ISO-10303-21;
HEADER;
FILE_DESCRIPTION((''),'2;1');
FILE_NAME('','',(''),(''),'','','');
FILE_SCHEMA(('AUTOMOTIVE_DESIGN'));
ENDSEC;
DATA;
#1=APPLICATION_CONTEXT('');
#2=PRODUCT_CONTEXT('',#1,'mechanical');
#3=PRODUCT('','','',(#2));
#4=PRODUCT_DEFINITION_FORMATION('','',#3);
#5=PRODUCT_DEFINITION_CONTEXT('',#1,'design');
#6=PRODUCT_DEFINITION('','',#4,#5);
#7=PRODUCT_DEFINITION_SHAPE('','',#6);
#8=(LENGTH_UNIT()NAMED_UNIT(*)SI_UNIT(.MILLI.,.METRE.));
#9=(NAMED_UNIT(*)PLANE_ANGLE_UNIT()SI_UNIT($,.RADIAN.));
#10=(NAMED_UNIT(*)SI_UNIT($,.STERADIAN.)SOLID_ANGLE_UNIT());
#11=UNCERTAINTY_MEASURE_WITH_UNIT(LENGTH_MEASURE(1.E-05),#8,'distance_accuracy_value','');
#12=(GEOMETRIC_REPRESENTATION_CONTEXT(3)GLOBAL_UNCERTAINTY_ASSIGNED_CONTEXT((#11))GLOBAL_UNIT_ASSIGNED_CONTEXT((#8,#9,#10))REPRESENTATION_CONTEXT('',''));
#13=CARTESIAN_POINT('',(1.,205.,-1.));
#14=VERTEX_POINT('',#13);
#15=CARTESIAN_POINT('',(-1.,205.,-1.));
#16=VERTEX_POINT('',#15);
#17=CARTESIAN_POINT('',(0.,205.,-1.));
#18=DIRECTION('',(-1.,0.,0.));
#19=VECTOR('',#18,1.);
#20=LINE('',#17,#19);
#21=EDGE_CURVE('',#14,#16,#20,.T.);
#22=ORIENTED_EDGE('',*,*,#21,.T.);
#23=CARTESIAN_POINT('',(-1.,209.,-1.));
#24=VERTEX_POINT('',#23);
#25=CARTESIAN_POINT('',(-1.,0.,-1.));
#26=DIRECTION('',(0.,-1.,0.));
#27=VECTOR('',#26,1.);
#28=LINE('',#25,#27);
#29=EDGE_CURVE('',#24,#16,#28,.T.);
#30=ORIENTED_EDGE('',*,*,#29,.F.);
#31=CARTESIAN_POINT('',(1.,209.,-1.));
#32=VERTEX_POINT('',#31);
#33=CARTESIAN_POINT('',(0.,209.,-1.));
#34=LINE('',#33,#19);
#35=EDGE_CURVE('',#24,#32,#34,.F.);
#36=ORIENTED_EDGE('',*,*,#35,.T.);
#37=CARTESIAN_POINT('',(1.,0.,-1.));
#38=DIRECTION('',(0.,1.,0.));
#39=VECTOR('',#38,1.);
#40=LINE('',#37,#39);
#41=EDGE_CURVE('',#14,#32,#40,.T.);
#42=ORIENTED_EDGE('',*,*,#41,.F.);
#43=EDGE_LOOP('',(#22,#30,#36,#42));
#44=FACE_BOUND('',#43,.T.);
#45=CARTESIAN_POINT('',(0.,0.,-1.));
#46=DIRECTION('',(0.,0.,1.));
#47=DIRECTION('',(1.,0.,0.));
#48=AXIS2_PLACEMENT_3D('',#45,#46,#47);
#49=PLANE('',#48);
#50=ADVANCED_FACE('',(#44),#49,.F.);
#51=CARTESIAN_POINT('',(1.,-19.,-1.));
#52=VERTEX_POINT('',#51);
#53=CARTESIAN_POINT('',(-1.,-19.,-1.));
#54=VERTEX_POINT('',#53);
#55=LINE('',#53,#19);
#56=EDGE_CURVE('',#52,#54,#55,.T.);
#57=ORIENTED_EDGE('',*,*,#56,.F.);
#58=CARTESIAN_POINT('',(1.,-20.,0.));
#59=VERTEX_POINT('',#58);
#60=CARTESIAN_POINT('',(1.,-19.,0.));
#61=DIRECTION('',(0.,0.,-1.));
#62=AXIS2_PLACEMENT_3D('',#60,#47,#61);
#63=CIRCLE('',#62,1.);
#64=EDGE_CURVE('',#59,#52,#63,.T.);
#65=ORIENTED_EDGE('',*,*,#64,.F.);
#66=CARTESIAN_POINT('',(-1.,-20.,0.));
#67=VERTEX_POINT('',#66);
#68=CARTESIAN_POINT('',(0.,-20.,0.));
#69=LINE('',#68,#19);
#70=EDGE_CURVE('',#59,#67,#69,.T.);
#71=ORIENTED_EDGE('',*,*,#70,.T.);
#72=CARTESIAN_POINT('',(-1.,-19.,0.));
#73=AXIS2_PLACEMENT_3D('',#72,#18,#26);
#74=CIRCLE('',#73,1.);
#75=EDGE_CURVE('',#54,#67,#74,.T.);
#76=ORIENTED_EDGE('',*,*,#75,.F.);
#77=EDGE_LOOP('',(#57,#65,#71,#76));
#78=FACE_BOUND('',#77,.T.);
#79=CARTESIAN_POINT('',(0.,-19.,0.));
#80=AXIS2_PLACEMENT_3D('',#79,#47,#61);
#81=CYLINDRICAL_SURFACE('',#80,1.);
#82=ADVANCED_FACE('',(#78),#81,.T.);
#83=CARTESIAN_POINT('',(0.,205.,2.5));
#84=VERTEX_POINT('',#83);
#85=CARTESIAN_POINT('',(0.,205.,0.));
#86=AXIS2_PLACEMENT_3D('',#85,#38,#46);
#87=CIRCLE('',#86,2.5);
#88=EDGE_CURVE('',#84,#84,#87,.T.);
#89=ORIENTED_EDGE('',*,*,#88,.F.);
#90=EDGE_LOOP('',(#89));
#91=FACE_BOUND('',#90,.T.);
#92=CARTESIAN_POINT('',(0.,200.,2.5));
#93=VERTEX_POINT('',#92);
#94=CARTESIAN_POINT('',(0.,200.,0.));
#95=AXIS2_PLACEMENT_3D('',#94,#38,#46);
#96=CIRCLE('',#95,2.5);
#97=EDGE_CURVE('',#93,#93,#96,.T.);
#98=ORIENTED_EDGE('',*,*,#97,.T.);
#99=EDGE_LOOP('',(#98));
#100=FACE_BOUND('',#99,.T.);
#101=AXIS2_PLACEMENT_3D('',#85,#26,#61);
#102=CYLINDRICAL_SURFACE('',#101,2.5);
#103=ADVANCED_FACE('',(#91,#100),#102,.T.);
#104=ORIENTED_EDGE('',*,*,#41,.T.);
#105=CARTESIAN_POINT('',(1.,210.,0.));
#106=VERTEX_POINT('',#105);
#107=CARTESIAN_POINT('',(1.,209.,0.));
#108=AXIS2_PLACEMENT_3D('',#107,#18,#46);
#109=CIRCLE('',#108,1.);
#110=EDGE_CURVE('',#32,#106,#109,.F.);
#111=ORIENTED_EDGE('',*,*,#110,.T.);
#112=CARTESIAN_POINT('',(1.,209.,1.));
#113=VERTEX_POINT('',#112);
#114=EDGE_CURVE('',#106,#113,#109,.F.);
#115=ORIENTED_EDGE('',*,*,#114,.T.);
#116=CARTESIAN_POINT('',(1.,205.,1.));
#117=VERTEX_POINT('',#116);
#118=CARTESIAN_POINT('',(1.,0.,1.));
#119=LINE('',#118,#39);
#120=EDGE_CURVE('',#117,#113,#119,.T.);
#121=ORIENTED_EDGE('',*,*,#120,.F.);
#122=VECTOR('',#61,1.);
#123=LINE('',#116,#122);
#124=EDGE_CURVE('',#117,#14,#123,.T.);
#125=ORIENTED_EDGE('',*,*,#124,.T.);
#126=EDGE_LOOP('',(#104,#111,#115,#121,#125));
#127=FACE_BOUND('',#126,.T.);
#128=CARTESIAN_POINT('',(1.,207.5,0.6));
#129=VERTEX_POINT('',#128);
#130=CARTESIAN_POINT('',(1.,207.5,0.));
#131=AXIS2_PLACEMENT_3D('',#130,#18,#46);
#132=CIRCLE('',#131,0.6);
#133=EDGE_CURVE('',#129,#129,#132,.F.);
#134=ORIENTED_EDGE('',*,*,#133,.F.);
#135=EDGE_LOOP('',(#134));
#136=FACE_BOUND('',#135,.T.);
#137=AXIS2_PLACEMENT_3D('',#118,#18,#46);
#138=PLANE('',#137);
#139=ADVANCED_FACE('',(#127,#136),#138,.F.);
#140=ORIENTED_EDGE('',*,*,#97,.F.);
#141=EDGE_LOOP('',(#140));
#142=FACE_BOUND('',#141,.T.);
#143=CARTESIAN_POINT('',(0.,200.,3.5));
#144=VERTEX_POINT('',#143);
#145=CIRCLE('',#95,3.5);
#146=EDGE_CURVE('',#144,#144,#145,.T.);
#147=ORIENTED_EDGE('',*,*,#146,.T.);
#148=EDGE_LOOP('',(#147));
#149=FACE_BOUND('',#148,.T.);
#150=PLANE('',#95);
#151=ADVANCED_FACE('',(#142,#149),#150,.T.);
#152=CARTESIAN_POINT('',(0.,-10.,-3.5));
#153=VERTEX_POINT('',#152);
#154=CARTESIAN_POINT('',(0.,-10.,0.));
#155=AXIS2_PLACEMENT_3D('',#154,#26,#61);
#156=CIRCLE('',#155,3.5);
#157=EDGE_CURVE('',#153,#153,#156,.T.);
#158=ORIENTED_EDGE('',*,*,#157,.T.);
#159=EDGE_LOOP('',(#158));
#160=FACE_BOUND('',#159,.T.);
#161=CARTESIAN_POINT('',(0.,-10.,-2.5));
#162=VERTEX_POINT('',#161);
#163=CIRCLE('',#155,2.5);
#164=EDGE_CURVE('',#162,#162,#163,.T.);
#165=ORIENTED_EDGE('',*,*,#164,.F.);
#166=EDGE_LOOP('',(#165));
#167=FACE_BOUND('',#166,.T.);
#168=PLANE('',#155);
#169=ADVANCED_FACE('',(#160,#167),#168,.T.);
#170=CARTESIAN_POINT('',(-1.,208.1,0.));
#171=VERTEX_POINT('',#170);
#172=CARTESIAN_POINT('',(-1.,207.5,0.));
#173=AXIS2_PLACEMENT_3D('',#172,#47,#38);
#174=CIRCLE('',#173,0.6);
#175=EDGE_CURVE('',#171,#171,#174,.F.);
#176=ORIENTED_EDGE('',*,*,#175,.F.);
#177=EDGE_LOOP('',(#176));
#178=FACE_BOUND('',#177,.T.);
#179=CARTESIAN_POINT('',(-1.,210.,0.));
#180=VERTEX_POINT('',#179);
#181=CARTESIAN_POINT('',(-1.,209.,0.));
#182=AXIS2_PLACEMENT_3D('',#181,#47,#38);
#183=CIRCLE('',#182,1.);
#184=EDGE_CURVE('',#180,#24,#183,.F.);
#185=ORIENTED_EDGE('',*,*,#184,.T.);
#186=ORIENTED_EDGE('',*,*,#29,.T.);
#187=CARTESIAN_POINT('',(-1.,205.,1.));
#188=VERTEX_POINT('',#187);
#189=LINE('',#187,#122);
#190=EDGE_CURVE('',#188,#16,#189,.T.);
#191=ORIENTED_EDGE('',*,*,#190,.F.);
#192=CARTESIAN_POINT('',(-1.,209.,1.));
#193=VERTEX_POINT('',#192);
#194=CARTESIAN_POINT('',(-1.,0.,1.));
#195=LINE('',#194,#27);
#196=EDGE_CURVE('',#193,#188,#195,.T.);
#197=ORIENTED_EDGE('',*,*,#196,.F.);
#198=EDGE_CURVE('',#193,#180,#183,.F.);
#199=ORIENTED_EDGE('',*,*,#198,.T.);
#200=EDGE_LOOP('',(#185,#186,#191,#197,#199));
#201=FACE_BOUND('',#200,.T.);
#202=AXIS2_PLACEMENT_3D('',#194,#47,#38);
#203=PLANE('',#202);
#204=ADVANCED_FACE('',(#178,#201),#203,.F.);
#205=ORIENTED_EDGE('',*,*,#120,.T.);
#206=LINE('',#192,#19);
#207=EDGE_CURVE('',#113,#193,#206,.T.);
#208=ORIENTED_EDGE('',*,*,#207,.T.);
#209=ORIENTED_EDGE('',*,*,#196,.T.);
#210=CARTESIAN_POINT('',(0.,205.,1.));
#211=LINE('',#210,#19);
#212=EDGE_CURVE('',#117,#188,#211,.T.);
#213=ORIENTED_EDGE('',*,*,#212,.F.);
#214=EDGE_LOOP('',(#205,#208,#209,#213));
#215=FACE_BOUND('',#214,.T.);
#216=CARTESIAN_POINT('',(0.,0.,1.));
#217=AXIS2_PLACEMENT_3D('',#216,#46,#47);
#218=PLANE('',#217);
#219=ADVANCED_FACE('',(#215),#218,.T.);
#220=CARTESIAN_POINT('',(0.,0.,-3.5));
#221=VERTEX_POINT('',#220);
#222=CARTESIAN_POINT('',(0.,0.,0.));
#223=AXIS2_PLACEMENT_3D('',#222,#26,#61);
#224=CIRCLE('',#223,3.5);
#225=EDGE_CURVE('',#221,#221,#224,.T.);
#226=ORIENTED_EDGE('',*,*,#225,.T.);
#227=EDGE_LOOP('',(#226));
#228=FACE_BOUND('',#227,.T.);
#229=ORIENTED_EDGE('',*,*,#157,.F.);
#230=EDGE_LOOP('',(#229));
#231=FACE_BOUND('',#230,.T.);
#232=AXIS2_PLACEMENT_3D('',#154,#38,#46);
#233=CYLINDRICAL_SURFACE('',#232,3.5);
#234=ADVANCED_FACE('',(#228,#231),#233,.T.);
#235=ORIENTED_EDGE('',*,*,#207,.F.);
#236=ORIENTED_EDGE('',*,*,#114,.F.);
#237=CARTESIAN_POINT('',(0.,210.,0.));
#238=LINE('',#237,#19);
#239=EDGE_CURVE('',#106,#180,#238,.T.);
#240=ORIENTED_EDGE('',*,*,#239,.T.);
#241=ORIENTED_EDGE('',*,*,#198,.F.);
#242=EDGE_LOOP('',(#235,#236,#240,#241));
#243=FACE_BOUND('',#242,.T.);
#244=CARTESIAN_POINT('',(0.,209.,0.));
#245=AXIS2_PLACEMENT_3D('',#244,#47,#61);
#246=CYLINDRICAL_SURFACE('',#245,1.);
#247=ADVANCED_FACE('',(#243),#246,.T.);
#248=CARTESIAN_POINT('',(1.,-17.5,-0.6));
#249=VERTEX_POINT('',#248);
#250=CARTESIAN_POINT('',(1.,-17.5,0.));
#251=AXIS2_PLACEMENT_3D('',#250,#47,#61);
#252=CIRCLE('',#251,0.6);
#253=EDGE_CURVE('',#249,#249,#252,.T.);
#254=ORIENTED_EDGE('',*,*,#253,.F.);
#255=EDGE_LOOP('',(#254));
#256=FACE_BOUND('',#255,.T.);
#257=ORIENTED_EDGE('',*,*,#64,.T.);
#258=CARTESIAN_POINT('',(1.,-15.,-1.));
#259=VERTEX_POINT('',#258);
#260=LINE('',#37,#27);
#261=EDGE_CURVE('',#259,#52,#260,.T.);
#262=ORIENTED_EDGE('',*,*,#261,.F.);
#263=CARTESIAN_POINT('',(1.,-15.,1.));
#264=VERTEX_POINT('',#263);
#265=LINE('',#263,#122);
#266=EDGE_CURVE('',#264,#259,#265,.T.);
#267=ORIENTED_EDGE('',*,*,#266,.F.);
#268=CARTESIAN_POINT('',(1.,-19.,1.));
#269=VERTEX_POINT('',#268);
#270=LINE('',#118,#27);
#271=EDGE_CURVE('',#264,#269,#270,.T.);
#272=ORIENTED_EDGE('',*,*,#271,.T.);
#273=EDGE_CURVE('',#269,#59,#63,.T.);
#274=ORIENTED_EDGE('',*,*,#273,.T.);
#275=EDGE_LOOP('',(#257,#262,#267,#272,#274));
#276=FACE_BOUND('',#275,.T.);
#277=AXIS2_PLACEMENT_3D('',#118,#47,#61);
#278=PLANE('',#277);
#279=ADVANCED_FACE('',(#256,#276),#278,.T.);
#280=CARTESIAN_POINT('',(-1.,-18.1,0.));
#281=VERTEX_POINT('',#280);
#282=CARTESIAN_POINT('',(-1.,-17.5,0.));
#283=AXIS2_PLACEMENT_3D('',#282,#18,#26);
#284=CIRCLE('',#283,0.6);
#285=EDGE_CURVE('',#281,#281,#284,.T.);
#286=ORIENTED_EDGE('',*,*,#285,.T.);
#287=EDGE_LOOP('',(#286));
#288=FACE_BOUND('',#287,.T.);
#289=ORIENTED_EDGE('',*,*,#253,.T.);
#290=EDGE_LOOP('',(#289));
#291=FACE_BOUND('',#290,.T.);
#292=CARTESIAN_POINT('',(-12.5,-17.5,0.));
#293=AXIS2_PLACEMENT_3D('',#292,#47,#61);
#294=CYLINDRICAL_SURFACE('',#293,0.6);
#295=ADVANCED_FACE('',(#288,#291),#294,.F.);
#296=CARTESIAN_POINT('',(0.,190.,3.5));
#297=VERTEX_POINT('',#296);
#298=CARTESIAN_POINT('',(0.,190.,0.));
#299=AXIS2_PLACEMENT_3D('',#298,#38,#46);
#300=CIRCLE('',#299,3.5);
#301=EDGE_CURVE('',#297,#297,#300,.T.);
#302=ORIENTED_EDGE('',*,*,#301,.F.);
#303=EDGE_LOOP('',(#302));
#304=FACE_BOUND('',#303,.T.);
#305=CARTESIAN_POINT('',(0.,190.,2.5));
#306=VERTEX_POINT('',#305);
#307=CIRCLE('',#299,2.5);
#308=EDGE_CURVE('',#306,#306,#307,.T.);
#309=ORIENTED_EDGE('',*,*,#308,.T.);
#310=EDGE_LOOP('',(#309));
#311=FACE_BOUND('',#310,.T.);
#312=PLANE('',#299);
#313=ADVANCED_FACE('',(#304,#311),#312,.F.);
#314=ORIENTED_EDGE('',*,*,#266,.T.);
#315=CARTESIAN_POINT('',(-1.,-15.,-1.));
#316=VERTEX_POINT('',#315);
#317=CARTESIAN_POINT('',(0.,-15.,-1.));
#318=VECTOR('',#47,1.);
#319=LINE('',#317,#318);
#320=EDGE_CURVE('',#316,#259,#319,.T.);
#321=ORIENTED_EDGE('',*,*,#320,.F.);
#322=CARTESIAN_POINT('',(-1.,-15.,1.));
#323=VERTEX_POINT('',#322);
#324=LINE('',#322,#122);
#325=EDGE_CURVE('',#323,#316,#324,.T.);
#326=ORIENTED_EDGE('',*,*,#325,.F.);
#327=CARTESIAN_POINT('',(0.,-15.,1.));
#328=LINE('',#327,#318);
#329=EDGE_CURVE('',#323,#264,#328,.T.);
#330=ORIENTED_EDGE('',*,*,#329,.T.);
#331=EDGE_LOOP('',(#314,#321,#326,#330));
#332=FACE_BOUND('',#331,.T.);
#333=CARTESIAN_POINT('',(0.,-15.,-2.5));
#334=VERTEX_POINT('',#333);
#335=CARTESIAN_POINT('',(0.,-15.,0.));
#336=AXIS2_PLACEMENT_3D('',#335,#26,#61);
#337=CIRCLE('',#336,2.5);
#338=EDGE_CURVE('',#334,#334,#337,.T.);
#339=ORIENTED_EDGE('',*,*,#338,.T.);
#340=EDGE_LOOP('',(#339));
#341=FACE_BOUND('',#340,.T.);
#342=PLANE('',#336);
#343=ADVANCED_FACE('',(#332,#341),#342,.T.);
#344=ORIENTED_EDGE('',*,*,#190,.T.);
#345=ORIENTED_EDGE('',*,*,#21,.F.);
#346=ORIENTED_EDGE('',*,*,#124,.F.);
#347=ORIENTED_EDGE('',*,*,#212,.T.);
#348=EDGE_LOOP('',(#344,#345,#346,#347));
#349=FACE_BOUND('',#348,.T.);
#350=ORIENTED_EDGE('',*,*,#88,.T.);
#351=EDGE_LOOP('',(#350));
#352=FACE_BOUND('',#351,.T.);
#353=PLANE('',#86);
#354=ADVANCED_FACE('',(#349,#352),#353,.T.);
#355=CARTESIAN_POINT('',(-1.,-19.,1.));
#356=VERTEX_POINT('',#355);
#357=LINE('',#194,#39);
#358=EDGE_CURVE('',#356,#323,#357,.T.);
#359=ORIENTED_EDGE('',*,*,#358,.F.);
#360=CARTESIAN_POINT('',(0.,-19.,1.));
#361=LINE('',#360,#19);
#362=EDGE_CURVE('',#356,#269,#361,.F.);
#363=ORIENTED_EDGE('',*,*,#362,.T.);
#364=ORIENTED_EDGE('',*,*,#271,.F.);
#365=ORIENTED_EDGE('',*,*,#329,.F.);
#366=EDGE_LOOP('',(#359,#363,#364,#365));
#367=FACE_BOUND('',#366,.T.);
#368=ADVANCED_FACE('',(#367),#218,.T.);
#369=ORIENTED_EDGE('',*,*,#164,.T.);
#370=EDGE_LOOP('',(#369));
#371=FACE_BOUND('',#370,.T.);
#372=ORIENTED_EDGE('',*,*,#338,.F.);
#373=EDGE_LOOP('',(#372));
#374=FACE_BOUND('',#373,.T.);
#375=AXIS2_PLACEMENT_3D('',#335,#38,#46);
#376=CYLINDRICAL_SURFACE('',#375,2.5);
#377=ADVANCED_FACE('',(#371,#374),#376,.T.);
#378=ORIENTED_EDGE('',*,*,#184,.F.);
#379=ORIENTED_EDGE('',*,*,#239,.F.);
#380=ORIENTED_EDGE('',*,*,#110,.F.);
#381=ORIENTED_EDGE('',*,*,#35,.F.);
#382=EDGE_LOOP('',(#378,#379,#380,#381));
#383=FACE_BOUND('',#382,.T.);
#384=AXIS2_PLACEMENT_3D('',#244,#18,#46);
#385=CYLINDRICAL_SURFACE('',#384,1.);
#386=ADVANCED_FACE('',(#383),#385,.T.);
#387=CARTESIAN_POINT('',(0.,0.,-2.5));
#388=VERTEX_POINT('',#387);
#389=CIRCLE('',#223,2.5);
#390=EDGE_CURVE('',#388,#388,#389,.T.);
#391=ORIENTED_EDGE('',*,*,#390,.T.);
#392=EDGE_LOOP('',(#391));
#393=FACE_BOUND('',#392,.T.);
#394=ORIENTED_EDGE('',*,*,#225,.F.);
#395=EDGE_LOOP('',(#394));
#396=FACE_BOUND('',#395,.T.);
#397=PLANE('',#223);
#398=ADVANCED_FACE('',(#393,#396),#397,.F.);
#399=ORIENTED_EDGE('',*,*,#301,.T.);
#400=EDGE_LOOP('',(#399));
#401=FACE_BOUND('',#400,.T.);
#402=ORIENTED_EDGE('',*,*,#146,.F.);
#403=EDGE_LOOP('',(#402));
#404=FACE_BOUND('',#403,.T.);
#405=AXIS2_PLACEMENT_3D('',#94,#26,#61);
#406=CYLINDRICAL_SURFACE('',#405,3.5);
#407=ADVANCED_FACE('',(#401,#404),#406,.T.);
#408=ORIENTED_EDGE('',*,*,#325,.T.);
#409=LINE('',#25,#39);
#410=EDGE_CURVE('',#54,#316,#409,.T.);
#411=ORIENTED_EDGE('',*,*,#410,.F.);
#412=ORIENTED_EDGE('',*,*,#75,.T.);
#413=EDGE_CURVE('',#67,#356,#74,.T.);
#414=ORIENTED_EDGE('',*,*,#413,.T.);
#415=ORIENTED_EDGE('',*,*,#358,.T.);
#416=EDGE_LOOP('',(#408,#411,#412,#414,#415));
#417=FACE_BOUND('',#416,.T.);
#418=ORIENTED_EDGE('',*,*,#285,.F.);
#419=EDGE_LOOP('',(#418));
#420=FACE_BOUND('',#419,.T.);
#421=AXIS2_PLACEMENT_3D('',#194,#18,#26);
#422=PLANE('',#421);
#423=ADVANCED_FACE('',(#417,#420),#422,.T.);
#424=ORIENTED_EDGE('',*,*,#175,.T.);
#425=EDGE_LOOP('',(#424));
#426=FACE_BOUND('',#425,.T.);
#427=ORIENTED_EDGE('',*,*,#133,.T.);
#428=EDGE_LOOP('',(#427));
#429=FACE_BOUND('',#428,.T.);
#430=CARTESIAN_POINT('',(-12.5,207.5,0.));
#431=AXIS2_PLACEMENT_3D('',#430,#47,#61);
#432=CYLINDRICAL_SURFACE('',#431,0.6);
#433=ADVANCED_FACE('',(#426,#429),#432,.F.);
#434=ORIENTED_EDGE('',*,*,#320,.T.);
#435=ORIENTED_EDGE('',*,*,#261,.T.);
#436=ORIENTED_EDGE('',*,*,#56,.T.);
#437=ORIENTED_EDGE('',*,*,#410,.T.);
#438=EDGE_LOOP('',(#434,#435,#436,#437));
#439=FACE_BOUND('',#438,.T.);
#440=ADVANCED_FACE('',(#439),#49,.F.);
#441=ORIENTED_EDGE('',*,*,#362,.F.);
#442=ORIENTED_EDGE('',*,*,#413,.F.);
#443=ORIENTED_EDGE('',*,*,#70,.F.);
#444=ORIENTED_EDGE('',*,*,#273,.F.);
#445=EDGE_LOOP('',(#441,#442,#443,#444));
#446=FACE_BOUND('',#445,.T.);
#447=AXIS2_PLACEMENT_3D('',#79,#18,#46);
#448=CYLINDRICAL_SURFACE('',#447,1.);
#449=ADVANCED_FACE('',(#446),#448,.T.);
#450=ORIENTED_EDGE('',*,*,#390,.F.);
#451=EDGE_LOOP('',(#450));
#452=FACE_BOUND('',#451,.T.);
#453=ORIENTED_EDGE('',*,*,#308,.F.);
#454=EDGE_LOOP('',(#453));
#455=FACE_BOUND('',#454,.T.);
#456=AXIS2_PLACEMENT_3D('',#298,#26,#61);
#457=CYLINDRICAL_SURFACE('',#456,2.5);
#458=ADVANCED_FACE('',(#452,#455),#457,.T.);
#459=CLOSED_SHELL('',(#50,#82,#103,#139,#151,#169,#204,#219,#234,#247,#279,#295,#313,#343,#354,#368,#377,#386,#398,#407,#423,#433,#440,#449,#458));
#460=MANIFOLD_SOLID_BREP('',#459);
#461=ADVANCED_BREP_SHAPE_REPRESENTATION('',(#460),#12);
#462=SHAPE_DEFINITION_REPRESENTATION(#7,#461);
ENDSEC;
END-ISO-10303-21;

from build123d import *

# Parameters (mm, degrees)
CROQUIS1_R               = 2.5
SALIENTE_EXTRUIR6_DEPTH  = 190
CROQUIS4_R               = 3.5
SALIENTE_EXTRUIR7_DEPTH  = 10
CROQUIS5_R               = 2.5
SALIENTE_EXTRUIR9_DEPTH  = 5
SALIENTE_EXTRUIR10_START = 10
CROQUIS6_R               = 3.5
SALIENTE_EXTRUIR10_DEPTH = 10
SALIENTE_EXTRUIR11_START = 5
CROQUIS7_R               = 2.5
SALIENTE_EXTRUIR11_DEPTH = 5
SALIENTE_EXTRUIR12_DEPTH = 1
CROQUIS10_R              = 0.6
CORTAR_EXTRUIR1_DEPTH    = 12.5
REDONDEO3_R              = 1
REDONDEO4_R              = 1


with BuildPart() as part:
    # Croquis1 → Saliente-Extruir6 (new body)
    with BuildSketch(Plane(origin=(0, 0, 0), x_dir=(1, 0, 0), z_dir=(0, 1, 0))):
        with Locations(Location((0, 0, 0), (0, 0, 270))):
            Circle(CROQUIS1_R)
    extrude(amount=SALIENTE_EXTRUIR6_DEPTH)

    # Croquis4 → Saliente-Extruir7 (add)
    with BuildSketch(Plane(origin=(0, 190, 0), x_dir=(1, 0, 0), z_dir=(0, 1, 0))):
        with Locations(Location((0, 0, 0), (0, 0, 270))):
            Circle(CROQUIS4_R)
    extrude(amount=SALIENTE_EXTRUIR7_DEPTH)

    # Croquis5 → Saliente-Extruir9 (add)
    with BuildSketch(Plane(origin=(0, 200, 0), x_dir=(1, 0, 0), z_dir=(0, 1, 0))):
        with Locations(Location((0, 0, 0), (0, 0, 270))):
            Circle(CROQUIS5_R)
    extrude(amount=SALIENTE_EXTRUIR9_DEPTH)

    # Croquis6 → Saliente-Extruir10 (add)
    with BuildSketch(Plane.XZ.offset(SALIENTE_EXTRUIR10_START)):
        with Locations(Location((0, 0, 0), (0, 0, 90))):
            Circle(CROQUIS6_R)
    extrude(amount=-SALIENTE_EXTRUIR10_DEPTH)

    # Croquis7 → Saliente-Extruir11 (add)
    with BuildSketch(Plane.XZ.offset(10).offset(SALIENTE_EXTRUIR11_START)):
        with Locations(Location((0, 0, 0), (0, 0, 270))):
            Circle(CROQUIS7_R)
    extrude(amount=-SALIENTE_EXTRUIR11_DEPTH)

    # Croquis8 → Saliente-Extruir12 (add, symmetric)
    with BuildSketch(Plane.XY):
        Polygon((1, 210), (-1, 210), (-1, 205), (0, 205), (1, 205), align=None)
        Polygon((0, -15), (1, -15), (1, -20), (-1, -20), (-1, -15), align=None)
    extrude(amount=SALIENTE_EXTRUIR12_DEPTH, both=True)

    # Croquis10 → Cortar-Extruir1 (cut, symmetric)
    with BuildSketch(Plane(origin=(0, 0, 0), x_dir=(0, 0, -1), z_dir=(1, 0, 0))):
        with Locations((0, -17.5)):
            Circle(CROQUIS10_R)
        with Locations(Location((0, 207.5, 0), (0, 0, 90))):
            Circle(CROQUIS10_R)
    extrude(amount=CORTAR_EXTRUIR1_DEPTH, both=True, mode=Mode.SUBTRACT)

    # Redondeo3
    redondeo3_edges = [part.edges().sort_by_distance(p)[0] for p in [
        (0, -20, 1),
    ]]
    fillet(redondeo3_edges, radius=REDONDEO3_R)

    # Redondeo4
    redondeo4_edges = [part.edges().sort_by_distance(p)[0] for p in [
        (0, 210, 1),
        (0, 210, -1),
        (0, -20, -1),
    ]]
    fillet(redondeo4_edges, radius=REDONDEO4_R - 0.0001)  # a hair under: the kernel refuses the full size


solid = part.part
